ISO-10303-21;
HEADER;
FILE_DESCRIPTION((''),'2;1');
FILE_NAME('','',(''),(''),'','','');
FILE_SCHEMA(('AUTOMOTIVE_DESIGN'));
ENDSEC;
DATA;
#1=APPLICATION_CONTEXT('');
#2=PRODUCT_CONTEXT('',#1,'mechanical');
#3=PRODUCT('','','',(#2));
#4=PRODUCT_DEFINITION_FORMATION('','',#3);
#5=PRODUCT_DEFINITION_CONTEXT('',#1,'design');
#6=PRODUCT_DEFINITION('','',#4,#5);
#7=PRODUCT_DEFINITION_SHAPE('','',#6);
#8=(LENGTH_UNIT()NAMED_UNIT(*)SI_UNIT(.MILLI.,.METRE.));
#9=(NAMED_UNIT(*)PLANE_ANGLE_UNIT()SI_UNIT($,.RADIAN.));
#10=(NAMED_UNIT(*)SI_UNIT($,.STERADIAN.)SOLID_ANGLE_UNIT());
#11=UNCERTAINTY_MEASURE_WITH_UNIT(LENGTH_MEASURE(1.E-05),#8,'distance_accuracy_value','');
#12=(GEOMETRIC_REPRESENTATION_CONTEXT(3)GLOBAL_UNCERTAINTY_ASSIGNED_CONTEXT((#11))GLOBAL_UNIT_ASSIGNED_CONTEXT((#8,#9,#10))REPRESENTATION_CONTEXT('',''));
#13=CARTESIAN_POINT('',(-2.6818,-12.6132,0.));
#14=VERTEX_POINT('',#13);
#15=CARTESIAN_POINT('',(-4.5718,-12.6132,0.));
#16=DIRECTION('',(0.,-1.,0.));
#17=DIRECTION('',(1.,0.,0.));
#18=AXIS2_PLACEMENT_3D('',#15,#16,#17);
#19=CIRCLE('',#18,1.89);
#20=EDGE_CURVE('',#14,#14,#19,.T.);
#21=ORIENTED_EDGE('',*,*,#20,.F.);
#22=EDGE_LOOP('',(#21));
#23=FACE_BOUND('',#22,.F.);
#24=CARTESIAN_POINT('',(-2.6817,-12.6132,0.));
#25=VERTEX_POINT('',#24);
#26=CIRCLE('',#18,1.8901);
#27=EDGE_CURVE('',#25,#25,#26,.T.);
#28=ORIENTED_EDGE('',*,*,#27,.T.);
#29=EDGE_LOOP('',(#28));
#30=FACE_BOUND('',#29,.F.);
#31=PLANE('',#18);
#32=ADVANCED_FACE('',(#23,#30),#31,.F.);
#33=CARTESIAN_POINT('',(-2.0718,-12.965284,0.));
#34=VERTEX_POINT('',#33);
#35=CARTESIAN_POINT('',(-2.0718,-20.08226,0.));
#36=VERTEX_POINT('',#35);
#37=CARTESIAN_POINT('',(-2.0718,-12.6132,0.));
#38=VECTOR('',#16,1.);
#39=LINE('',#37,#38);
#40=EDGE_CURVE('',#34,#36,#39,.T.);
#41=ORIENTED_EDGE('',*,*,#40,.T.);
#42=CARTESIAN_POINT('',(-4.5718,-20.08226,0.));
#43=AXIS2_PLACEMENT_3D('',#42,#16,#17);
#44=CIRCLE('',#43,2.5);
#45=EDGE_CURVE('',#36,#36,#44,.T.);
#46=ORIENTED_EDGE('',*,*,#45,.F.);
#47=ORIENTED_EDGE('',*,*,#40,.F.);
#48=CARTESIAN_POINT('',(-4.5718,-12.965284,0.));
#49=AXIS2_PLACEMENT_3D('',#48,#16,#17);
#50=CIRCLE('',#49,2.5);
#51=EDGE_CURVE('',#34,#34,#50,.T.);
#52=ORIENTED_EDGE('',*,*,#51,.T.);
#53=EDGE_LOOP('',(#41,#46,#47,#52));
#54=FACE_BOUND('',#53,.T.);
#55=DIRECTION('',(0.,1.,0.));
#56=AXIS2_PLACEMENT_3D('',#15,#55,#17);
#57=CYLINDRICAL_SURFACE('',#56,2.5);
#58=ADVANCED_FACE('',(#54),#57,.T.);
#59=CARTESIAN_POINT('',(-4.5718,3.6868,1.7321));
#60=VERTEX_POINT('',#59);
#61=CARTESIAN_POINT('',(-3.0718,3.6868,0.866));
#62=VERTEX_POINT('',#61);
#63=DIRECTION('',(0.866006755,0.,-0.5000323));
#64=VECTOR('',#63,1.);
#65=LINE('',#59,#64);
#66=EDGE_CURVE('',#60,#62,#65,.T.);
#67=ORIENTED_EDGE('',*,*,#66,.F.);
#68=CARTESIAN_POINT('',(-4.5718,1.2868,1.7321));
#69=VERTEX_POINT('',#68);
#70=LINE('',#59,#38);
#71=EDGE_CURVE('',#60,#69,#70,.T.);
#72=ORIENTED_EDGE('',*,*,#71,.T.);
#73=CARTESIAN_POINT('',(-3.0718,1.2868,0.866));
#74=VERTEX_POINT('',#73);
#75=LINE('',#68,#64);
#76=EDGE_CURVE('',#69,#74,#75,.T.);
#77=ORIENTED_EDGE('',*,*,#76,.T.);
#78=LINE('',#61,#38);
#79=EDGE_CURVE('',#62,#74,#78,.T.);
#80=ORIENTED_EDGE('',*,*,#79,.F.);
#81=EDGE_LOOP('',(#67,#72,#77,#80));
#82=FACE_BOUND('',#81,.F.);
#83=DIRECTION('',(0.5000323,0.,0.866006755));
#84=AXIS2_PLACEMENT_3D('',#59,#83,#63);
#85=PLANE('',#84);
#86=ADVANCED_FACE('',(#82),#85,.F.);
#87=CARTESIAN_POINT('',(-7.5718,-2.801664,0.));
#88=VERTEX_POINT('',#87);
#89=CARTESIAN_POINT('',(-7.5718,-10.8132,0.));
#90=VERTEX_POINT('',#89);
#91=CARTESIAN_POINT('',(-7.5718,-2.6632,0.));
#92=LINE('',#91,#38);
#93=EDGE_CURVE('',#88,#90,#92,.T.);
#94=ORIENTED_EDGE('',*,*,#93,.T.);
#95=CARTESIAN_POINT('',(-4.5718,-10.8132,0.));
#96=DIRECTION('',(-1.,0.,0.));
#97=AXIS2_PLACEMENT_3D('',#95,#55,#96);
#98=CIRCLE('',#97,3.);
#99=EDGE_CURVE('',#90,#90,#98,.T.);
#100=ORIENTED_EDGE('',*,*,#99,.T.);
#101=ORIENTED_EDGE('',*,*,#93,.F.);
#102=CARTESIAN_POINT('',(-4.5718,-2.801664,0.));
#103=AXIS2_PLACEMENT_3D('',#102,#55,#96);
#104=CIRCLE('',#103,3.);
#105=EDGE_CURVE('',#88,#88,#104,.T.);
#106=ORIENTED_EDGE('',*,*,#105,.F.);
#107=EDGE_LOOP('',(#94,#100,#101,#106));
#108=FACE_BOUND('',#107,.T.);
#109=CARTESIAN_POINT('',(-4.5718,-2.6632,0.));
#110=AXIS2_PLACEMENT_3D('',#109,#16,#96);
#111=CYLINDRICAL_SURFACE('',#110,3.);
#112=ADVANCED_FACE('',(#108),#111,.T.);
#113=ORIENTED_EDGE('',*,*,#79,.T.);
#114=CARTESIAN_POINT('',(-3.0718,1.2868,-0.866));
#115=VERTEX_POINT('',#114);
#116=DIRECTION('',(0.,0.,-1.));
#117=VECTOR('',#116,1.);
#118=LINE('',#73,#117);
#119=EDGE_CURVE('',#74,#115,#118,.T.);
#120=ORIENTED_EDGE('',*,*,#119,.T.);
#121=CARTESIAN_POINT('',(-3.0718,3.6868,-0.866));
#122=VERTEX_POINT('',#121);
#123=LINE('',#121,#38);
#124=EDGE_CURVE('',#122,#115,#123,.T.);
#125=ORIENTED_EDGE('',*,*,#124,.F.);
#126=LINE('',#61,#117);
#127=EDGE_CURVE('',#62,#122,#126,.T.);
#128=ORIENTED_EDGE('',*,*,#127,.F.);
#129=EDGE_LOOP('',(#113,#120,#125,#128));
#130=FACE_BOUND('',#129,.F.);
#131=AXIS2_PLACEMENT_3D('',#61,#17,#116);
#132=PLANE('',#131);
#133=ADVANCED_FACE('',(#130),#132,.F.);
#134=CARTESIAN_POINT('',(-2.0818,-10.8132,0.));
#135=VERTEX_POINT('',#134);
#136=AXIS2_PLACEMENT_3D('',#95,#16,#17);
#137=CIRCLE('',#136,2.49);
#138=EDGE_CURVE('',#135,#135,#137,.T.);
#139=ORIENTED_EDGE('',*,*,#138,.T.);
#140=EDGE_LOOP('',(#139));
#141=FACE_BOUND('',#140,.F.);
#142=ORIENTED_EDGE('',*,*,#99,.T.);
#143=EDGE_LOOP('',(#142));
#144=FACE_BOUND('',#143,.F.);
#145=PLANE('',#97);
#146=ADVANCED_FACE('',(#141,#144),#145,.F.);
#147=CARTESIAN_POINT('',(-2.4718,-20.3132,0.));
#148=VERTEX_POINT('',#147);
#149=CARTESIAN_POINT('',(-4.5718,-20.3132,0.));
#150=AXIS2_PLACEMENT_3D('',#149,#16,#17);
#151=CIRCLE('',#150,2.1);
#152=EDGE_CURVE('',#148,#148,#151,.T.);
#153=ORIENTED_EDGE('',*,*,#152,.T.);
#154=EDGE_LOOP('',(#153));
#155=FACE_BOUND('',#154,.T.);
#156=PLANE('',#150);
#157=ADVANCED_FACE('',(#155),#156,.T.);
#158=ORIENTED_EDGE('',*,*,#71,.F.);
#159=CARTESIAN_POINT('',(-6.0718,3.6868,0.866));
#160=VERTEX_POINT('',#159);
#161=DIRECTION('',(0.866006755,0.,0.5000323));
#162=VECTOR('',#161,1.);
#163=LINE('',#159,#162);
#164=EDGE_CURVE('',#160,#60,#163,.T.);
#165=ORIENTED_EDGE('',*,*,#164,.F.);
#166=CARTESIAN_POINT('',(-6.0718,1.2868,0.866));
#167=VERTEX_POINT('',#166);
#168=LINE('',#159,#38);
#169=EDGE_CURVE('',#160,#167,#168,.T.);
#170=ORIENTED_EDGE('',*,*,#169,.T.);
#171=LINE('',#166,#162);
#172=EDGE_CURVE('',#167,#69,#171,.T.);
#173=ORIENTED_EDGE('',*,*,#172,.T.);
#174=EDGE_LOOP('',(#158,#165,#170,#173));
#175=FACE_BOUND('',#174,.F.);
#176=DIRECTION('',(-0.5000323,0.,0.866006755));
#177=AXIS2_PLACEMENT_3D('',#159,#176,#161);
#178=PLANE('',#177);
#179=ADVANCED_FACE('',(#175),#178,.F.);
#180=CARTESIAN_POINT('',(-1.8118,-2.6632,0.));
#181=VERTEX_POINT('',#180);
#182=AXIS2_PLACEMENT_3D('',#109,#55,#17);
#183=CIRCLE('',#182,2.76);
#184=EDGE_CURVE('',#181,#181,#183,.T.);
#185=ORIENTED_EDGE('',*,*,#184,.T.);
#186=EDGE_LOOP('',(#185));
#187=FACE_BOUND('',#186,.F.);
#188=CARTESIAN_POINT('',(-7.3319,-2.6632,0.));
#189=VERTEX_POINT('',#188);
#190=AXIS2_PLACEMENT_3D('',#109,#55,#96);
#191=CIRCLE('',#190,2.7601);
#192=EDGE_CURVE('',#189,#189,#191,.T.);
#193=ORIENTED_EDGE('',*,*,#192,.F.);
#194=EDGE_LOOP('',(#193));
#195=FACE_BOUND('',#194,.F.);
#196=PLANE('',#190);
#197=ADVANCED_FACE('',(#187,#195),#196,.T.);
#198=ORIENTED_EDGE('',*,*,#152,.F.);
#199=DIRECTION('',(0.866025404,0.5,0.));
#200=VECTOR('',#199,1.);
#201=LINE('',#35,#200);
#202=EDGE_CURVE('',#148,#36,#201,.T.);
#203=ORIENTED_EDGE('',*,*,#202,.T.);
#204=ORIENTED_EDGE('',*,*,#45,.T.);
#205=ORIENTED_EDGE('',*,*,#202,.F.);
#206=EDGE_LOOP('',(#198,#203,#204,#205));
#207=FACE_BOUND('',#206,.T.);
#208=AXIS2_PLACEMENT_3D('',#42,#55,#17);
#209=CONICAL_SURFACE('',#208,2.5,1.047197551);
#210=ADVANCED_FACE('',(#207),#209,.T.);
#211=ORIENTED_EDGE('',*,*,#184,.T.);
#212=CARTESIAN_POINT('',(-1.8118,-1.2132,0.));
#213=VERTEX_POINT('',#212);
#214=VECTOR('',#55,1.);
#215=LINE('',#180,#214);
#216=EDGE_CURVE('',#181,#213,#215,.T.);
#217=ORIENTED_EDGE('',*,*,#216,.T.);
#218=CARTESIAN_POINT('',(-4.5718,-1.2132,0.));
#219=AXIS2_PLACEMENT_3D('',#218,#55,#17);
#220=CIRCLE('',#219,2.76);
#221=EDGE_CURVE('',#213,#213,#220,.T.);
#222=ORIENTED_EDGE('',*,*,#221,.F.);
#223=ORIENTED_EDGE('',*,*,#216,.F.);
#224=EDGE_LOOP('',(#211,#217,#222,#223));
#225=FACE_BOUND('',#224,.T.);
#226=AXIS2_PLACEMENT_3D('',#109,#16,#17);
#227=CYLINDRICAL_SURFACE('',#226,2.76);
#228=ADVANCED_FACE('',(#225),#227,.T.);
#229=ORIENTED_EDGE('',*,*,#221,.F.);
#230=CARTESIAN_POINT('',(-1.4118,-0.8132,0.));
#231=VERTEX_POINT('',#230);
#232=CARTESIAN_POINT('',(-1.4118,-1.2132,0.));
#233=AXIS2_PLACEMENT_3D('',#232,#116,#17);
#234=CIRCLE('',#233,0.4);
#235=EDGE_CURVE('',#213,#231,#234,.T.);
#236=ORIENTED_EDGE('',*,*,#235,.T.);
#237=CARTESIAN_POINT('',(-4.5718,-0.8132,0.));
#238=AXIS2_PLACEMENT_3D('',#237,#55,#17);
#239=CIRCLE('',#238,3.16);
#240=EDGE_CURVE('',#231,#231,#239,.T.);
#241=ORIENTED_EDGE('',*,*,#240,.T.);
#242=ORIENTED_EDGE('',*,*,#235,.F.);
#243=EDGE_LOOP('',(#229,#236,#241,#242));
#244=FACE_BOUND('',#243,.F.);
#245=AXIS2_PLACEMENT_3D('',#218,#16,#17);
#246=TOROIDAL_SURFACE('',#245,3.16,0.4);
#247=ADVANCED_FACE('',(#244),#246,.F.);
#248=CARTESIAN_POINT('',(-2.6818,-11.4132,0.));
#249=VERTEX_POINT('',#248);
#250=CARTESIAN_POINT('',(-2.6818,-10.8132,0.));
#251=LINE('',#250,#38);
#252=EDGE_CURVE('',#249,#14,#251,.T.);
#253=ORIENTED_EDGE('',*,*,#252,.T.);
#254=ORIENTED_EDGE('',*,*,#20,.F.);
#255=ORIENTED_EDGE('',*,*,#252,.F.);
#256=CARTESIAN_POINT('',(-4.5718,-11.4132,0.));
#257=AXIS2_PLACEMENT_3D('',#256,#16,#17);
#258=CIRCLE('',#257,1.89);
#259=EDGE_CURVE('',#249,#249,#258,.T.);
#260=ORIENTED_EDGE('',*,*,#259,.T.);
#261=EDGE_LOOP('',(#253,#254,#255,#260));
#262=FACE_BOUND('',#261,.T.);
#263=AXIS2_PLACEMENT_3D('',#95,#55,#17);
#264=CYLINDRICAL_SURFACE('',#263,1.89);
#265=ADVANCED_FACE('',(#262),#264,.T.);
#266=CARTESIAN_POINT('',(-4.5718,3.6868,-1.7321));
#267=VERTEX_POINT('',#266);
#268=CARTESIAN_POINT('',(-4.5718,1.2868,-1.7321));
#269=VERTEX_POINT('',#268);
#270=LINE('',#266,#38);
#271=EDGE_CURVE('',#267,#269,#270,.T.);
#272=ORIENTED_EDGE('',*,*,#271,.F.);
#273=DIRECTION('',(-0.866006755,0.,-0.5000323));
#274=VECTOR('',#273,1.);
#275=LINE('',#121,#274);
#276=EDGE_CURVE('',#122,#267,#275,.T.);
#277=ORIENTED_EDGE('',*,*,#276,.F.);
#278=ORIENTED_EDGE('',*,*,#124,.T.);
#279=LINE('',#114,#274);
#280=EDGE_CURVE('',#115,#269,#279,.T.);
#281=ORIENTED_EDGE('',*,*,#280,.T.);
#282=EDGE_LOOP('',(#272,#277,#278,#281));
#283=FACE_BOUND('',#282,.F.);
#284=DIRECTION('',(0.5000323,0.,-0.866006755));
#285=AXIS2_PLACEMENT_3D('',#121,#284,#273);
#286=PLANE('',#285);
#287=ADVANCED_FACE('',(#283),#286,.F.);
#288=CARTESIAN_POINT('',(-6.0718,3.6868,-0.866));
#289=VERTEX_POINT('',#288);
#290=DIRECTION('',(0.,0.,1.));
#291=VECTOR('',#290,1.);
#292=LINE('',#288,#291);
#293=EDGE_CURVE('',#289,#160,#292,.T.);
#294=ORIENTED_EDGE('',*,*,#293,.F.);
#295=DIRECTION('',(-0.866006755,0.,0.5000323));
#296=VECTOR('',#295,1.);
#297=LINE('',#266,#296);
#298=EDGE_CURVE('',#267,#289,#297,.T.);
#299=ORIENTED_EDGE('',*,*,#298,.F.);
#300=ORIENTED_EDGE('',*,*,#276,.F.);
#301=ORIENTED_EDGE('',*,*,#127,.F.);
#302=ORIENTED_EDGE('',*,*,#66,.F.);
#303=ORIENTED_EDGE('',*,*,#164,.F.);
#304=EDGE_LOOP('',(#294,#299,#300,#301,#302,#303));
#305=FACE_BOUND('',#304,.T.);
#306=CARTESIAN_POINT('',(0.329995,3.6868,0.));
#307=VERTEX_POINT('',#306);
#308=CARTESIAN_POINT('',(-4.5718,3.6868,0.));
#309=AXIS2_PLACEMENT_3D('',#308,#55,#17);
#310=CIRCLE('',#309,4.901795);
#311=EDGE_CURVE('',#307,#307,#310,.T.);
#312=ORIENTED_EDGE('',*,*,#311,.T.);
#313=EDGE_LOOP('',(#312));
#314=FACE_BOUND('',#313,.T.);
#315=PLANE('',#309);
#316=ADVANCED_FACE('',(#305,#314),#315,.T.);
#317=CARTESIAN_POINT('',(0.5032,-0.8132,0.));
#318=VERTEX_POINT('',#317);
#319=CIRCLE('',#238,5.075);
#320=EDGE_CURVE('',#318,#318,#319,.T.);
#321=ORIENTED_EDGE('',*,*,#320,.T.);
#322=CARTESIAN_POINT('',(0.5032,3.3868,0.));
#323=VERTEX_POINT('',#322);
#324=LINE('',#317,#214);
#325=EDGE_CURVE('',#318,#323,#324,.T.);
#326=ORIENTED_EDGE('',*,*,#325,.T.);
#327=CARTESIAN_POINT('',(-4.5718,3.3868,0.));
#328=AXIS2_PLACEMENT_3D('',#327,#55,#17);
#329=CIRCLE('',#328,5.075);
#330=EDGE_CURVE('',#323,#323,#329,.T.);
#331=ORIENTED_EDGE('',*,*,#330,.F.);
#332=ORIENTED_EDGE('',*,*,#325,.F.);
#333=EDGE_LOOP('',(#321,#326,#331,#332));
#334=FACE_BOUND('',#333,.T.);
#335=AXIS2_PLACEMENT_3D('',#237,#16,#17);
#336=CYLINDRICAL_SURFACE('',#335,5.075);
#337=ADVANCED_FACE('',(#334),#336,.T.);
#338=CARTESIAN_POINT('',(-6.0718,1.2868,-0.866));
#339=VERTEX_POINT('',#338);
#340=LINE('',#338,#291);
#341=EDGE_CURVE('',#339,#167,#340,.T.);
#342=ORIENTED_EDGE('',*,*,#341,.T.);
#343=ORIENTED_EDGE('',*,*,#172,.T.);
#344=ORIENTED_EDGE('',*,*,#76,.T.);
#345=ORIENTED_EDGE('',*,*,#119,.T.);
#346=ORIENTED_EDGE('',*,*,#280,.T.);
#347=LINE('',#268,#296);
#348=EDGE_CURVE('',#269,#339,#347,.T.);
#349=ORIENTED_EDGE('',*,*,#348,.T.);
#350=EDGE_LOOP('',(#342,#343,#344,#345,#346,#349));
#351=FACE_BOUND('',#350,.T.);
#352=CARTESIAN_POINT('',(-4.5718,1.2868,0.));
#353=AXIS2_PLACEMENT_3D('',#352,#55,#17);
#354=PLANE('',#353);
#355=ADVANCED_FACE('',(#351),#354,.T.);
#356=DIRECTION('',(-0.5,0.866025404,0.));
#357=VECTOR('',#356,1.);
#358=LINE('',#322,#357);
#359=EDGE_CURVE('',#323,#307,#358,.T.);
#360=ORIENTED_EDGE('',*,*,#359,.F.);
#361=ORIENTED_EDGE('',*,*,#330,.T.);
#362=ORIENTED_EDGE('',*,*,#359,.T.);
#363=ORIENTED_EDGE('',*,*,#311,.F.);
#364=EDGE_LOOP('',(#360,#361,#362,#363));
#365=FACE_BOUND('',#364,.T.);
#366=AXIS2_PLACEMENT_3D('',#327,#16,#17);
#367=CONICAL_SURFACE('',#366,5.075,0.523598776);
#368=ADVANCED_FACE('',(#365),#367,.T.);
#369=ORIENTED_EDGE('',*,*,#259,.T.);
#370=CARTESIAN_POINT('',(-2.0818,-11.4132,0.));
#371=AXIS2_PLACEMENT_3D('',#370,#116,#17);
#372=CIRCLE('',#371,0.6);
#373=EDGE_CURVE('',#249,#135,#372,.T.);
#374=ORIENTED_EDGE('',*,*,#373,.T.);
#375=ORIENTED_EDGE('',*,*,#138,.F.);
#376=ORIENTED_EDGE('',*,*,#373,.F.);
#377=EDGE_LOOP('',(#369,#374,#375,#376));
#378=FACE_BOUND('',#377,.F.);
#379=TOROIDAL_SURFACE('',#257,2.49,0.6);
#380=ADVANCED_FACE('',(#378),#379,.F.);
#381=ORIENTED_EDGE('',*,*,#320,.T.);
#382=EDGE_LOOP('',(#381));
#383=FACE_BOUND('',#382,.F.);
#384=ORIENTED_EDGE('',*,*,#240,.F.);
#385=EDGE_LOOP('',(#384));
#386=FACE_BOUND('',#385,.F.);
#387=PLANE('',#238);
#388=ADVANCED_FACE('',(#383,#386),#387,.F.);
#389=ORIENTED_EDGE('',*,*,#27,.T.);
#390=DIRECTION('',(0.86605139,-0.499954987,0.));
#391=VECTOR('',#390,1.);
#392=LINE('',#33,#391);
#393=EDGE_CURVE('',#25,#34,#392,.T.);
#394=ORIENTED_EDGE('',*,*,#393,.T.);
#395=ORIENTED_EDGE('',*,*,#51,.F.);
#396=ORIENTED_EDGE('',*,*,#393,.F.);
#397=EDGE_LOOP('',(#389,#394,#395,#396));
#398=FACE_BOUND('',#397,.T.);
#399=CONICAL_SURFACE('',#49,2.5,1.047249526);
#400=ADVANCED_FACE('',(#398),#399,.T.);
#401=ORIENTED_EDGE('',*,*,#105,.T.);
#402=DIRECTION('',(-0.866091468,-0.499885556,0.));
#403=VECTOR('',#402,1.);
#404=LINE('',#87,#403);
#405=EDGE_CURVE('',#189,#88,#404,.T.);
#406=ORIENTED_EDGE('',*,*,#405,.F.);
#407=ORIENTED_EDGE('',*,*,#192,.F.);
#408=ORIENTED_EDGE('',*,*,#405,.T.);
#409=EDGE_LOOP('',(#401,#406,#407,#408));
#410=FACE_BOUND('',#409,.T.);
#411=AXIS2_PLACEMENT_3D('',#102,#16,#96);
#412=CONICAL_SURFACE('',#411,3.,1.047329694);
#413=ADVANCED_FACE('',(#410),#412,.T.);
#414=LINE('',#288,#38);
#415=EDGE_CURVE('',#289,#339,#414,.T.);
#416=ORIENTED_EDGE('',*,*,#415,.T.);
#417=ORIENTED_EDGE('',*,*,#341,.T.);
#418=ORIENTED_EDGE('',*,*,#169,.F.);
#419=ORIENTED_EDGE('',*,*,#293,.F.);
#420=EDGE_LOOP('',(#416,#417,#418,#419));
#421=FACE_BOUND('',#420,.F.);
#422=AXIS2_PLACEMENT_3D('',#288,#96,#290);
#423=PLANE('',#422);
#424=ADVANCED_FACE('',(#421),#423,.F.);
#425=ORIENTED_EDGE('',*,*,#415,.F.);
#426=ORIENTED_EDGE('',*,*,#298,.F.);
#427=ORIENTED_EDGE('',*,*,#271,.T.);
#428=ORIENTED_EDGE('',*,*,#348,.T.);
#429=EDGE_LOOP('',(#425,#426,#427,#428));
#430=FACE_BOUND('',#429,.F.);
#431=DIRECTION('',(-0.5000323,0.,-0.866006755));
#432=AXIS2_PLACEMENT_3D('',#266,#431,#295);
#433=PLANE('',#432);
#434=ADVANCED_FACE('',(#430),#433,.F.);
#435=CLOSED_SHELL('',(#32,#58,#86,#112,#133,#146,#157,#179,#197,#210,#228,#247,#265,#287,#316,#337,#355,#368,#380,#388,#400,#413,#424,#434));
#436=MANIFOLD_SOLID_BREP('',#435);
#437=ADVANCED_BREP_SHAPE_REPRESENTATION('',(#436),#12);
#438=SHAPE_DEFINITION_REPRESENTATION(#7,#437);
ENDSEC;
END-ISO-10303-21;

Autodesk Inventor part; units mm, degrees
ref_plane "YZ Plane" through (0, 0, 0) normal (1, 0, 0) x (0, 1, 0)
ref_plane "XZ Plane" through (0, 0, 0) normal (0, 1, 0) x (-1, 0, 0)
ref_plane "XY Plane" through (0, 0, 0) normal (0, 0, 1) x (1, 0, 0)
sketch "Sketch1" plane through (0, 0, 0) normal (0, 0, 1) x (1, 0, 0)
  line L0 (-4.5718, -2.6632) -> (-7.5718, -2.6632)
  line L1 (-7.5718, -2.6632) -> (-7.5718, -10.8132)
  line L2 (-7.5718, -10.8132) -> (-4.5718, -10.8132)
  line L3 (-4.5718, -10.8132) -> (-4.5718, -2.6632)
  dimension "d1" = 8.15
  dimension "d2" = 3
revolve "Shoulder" add sketch "Sketch1" angle 360 about axis through (-4.5718, -10.8132, 0) along (0, 1, 0)
sketch "Sketch2" plane through (-4.5718, -2.6632, 0) normal (0, 1, 0) x (1, 0, 0)
  circle A0 centre (0, 0) radius 3 projected
  circle A1 centre (0, 0) radius 2.76
  dimension "d3" = 5.52
extrude "Shoulder_neck" add sketch "Sketch2" along normal blind 1.85 contours A1
sketch "Sketch3" plane through (-4.5718, -0.8132, 0) normal (0, 1, 0) x (1, 0, 0)
  circle A0 centre (0, 0) radius 2.76 projected
  circle A1 centre (0, 0) radius 5.075
  dimension "d6" = 10.15
extrude "Head" add sketch "Sketch3" along normal blind 4.5 contours A0 | A1
sketch "Sketch4" plane through (-4.5718, -10.8132, 0) normal (0, -1, 0) x (1, 0, 0)
  circle A0 centre (0, 0) radius 3 projected
  circle A1 centre (0, 0) radius 1.89
  dimension "d9" = 3.78
extrude "Thread_neck" add sketch "Sketch4" along normal blind 1.8 contours A1
sketch "Sketch5" plane through (-4.5718, -12.6132, 0) normal (0, -1, 0) x (1, 0, 0)
  circle A0 centre (0, 0) radius 1.89 projected
  circle A1 centre (0, 0) radius 2.5
  dimension "d12" = 5
extrude "Thread_shoulder" add sketch "Sketch5" along normal blind 7.7 contours A0 | A1
sketch "Sketch6" plane through (-4.5718, 3.6868, 0) normal (0, 1, 0) x (1, 0, 0)
  circle A0 centre (0, 0) radius 5.075 projected
  circle A1 centre (0, 0) radius 1.5 construction
  line L0 (-1.5, 0.866) -> (-1.5, -0.866)
  line L1 (-1.5, -0.866) -> (0, -1.7321)
  line L2 (0, -1.7321) -> (1.5, -0.866)
  line L3 (1.5, -0.866) -> (1.5, 0.866)
  line L4 (1.5, 0.866) -> (0, 1.7321)
  line L5 (0, 1.7321) -> (-1.5, 0.866)
  dimension "d15" = 3
extrude "Hex" cut sketch "Sketch6" against normal blind 2.4 contours L5 L4 L3 L2 L1 L0
chamfer "Chamfer1" distance 0.24 angle 30 1 edges at (-1.5718, -2.6632, 0) measured on face at (-7.436, -2.6632, -0.4595)
fillet "Fillet1" radius 0.4 1 edges at (-7.3318, -0.8132, 0)
chamfer "Chamfer2" distance 0.3 angle 30 1 edges at (-9.6468, 3.6868, 0) measured on face at (0.4867, 2.1868, 0.4084)
chamfer "Chamfer3" distance 0.4 angle 30 1 edges at (-7.0718, -20.3132, 0) measured on face at (-3.3106, -20.3132, -0.6619)
fillet "Fillet2" radius 0.6 1 edges at (-6.4618, -10.8132, 0)
chamfer "Chamfer7" distance 0.61 angle 30 1 edges at (-7.0718, -12.6132, 0) measured on face at (-2.3177, -12.6132, -0.3502)
thread "Thread" size "M5x0.8" class "6g" standard "ANSI Metric M Profile" full length
equation "\"d1\" = Shoulder_length - Shoulder_neck_length"
equation "\"d2\" = 0.5 * Shoulder_diameter"
equation "\"d3\" = Shoulder_neck_dia"
equation "\"d4\" = Shoulder_neck_length"
equation "\"d6\" = Head_diameter"
equation "\"d7\" = Head_height"
equation "\"d9\" = Thread_neck_dia"
equation "\"d10\" = Thread_neck_length"
equation "\"d12\" = Thread_diameter"
equation "\"d13\" = Thread_length - Thread_neck_length"
equation "\"d15\" = Hex_size"
equation "\"d16\" = Hex_length"
equation "\"d18\" = -0.5 * Shoulder_neck_dia + 0.5 * Shoulder_diameter"
equation "\"d64\" = -0.5 * Shoulder_neck_dia + 0.5 * Shoulder_diameter"
equation "\"d21\" = 0.1 * Hex_size"
equation "\"d65\" = 0.1 * Hex_size"
equation "\"d23\" = 0.5 * Thread_pitch"
equation "\"d66\" = 0.5 * Thread_pitch"
equation "\"d25\" = Thread_neck_radius"
equation "\"d60\" = -0.5 * Thread_neck_dia + 0.5 * Thread_diameter"
equation "\"d67\" = -0.5 * Thread_neck_dia + 0.5 * Thread_diameter"
equation "\"Shoulder_diameter\" = 6"
equation "\"Shoulder_length\" = 10"
equation "\"Shoulder_neck_dia\" = 5.52"
equation "\"Thread_diameter\" = 5"
equation "\"Thread_length\" = 9.5"
equation "\"Head_diameter\" = 10.15"
equation "\"Head_height\" = 4.5"
equation "\"Thread_neck_dia\" = 3.78"
equation "\"Hex_size\" = 3"
equation "\"Hex_length\" = 2.4"
equation "\"Thread_pitch\" = 0.8"
equation "\"Shoulder_neck_length\" = 1.85"
equation "\"Thread_neck_length\" = 1.8"
equation "\"Thread_neck_radius\" = 0.6"
properties part number "SCREW, SHOULDER, P, 12.9,  M6X10MM" material "Steel, High Strength Low Alloy"
